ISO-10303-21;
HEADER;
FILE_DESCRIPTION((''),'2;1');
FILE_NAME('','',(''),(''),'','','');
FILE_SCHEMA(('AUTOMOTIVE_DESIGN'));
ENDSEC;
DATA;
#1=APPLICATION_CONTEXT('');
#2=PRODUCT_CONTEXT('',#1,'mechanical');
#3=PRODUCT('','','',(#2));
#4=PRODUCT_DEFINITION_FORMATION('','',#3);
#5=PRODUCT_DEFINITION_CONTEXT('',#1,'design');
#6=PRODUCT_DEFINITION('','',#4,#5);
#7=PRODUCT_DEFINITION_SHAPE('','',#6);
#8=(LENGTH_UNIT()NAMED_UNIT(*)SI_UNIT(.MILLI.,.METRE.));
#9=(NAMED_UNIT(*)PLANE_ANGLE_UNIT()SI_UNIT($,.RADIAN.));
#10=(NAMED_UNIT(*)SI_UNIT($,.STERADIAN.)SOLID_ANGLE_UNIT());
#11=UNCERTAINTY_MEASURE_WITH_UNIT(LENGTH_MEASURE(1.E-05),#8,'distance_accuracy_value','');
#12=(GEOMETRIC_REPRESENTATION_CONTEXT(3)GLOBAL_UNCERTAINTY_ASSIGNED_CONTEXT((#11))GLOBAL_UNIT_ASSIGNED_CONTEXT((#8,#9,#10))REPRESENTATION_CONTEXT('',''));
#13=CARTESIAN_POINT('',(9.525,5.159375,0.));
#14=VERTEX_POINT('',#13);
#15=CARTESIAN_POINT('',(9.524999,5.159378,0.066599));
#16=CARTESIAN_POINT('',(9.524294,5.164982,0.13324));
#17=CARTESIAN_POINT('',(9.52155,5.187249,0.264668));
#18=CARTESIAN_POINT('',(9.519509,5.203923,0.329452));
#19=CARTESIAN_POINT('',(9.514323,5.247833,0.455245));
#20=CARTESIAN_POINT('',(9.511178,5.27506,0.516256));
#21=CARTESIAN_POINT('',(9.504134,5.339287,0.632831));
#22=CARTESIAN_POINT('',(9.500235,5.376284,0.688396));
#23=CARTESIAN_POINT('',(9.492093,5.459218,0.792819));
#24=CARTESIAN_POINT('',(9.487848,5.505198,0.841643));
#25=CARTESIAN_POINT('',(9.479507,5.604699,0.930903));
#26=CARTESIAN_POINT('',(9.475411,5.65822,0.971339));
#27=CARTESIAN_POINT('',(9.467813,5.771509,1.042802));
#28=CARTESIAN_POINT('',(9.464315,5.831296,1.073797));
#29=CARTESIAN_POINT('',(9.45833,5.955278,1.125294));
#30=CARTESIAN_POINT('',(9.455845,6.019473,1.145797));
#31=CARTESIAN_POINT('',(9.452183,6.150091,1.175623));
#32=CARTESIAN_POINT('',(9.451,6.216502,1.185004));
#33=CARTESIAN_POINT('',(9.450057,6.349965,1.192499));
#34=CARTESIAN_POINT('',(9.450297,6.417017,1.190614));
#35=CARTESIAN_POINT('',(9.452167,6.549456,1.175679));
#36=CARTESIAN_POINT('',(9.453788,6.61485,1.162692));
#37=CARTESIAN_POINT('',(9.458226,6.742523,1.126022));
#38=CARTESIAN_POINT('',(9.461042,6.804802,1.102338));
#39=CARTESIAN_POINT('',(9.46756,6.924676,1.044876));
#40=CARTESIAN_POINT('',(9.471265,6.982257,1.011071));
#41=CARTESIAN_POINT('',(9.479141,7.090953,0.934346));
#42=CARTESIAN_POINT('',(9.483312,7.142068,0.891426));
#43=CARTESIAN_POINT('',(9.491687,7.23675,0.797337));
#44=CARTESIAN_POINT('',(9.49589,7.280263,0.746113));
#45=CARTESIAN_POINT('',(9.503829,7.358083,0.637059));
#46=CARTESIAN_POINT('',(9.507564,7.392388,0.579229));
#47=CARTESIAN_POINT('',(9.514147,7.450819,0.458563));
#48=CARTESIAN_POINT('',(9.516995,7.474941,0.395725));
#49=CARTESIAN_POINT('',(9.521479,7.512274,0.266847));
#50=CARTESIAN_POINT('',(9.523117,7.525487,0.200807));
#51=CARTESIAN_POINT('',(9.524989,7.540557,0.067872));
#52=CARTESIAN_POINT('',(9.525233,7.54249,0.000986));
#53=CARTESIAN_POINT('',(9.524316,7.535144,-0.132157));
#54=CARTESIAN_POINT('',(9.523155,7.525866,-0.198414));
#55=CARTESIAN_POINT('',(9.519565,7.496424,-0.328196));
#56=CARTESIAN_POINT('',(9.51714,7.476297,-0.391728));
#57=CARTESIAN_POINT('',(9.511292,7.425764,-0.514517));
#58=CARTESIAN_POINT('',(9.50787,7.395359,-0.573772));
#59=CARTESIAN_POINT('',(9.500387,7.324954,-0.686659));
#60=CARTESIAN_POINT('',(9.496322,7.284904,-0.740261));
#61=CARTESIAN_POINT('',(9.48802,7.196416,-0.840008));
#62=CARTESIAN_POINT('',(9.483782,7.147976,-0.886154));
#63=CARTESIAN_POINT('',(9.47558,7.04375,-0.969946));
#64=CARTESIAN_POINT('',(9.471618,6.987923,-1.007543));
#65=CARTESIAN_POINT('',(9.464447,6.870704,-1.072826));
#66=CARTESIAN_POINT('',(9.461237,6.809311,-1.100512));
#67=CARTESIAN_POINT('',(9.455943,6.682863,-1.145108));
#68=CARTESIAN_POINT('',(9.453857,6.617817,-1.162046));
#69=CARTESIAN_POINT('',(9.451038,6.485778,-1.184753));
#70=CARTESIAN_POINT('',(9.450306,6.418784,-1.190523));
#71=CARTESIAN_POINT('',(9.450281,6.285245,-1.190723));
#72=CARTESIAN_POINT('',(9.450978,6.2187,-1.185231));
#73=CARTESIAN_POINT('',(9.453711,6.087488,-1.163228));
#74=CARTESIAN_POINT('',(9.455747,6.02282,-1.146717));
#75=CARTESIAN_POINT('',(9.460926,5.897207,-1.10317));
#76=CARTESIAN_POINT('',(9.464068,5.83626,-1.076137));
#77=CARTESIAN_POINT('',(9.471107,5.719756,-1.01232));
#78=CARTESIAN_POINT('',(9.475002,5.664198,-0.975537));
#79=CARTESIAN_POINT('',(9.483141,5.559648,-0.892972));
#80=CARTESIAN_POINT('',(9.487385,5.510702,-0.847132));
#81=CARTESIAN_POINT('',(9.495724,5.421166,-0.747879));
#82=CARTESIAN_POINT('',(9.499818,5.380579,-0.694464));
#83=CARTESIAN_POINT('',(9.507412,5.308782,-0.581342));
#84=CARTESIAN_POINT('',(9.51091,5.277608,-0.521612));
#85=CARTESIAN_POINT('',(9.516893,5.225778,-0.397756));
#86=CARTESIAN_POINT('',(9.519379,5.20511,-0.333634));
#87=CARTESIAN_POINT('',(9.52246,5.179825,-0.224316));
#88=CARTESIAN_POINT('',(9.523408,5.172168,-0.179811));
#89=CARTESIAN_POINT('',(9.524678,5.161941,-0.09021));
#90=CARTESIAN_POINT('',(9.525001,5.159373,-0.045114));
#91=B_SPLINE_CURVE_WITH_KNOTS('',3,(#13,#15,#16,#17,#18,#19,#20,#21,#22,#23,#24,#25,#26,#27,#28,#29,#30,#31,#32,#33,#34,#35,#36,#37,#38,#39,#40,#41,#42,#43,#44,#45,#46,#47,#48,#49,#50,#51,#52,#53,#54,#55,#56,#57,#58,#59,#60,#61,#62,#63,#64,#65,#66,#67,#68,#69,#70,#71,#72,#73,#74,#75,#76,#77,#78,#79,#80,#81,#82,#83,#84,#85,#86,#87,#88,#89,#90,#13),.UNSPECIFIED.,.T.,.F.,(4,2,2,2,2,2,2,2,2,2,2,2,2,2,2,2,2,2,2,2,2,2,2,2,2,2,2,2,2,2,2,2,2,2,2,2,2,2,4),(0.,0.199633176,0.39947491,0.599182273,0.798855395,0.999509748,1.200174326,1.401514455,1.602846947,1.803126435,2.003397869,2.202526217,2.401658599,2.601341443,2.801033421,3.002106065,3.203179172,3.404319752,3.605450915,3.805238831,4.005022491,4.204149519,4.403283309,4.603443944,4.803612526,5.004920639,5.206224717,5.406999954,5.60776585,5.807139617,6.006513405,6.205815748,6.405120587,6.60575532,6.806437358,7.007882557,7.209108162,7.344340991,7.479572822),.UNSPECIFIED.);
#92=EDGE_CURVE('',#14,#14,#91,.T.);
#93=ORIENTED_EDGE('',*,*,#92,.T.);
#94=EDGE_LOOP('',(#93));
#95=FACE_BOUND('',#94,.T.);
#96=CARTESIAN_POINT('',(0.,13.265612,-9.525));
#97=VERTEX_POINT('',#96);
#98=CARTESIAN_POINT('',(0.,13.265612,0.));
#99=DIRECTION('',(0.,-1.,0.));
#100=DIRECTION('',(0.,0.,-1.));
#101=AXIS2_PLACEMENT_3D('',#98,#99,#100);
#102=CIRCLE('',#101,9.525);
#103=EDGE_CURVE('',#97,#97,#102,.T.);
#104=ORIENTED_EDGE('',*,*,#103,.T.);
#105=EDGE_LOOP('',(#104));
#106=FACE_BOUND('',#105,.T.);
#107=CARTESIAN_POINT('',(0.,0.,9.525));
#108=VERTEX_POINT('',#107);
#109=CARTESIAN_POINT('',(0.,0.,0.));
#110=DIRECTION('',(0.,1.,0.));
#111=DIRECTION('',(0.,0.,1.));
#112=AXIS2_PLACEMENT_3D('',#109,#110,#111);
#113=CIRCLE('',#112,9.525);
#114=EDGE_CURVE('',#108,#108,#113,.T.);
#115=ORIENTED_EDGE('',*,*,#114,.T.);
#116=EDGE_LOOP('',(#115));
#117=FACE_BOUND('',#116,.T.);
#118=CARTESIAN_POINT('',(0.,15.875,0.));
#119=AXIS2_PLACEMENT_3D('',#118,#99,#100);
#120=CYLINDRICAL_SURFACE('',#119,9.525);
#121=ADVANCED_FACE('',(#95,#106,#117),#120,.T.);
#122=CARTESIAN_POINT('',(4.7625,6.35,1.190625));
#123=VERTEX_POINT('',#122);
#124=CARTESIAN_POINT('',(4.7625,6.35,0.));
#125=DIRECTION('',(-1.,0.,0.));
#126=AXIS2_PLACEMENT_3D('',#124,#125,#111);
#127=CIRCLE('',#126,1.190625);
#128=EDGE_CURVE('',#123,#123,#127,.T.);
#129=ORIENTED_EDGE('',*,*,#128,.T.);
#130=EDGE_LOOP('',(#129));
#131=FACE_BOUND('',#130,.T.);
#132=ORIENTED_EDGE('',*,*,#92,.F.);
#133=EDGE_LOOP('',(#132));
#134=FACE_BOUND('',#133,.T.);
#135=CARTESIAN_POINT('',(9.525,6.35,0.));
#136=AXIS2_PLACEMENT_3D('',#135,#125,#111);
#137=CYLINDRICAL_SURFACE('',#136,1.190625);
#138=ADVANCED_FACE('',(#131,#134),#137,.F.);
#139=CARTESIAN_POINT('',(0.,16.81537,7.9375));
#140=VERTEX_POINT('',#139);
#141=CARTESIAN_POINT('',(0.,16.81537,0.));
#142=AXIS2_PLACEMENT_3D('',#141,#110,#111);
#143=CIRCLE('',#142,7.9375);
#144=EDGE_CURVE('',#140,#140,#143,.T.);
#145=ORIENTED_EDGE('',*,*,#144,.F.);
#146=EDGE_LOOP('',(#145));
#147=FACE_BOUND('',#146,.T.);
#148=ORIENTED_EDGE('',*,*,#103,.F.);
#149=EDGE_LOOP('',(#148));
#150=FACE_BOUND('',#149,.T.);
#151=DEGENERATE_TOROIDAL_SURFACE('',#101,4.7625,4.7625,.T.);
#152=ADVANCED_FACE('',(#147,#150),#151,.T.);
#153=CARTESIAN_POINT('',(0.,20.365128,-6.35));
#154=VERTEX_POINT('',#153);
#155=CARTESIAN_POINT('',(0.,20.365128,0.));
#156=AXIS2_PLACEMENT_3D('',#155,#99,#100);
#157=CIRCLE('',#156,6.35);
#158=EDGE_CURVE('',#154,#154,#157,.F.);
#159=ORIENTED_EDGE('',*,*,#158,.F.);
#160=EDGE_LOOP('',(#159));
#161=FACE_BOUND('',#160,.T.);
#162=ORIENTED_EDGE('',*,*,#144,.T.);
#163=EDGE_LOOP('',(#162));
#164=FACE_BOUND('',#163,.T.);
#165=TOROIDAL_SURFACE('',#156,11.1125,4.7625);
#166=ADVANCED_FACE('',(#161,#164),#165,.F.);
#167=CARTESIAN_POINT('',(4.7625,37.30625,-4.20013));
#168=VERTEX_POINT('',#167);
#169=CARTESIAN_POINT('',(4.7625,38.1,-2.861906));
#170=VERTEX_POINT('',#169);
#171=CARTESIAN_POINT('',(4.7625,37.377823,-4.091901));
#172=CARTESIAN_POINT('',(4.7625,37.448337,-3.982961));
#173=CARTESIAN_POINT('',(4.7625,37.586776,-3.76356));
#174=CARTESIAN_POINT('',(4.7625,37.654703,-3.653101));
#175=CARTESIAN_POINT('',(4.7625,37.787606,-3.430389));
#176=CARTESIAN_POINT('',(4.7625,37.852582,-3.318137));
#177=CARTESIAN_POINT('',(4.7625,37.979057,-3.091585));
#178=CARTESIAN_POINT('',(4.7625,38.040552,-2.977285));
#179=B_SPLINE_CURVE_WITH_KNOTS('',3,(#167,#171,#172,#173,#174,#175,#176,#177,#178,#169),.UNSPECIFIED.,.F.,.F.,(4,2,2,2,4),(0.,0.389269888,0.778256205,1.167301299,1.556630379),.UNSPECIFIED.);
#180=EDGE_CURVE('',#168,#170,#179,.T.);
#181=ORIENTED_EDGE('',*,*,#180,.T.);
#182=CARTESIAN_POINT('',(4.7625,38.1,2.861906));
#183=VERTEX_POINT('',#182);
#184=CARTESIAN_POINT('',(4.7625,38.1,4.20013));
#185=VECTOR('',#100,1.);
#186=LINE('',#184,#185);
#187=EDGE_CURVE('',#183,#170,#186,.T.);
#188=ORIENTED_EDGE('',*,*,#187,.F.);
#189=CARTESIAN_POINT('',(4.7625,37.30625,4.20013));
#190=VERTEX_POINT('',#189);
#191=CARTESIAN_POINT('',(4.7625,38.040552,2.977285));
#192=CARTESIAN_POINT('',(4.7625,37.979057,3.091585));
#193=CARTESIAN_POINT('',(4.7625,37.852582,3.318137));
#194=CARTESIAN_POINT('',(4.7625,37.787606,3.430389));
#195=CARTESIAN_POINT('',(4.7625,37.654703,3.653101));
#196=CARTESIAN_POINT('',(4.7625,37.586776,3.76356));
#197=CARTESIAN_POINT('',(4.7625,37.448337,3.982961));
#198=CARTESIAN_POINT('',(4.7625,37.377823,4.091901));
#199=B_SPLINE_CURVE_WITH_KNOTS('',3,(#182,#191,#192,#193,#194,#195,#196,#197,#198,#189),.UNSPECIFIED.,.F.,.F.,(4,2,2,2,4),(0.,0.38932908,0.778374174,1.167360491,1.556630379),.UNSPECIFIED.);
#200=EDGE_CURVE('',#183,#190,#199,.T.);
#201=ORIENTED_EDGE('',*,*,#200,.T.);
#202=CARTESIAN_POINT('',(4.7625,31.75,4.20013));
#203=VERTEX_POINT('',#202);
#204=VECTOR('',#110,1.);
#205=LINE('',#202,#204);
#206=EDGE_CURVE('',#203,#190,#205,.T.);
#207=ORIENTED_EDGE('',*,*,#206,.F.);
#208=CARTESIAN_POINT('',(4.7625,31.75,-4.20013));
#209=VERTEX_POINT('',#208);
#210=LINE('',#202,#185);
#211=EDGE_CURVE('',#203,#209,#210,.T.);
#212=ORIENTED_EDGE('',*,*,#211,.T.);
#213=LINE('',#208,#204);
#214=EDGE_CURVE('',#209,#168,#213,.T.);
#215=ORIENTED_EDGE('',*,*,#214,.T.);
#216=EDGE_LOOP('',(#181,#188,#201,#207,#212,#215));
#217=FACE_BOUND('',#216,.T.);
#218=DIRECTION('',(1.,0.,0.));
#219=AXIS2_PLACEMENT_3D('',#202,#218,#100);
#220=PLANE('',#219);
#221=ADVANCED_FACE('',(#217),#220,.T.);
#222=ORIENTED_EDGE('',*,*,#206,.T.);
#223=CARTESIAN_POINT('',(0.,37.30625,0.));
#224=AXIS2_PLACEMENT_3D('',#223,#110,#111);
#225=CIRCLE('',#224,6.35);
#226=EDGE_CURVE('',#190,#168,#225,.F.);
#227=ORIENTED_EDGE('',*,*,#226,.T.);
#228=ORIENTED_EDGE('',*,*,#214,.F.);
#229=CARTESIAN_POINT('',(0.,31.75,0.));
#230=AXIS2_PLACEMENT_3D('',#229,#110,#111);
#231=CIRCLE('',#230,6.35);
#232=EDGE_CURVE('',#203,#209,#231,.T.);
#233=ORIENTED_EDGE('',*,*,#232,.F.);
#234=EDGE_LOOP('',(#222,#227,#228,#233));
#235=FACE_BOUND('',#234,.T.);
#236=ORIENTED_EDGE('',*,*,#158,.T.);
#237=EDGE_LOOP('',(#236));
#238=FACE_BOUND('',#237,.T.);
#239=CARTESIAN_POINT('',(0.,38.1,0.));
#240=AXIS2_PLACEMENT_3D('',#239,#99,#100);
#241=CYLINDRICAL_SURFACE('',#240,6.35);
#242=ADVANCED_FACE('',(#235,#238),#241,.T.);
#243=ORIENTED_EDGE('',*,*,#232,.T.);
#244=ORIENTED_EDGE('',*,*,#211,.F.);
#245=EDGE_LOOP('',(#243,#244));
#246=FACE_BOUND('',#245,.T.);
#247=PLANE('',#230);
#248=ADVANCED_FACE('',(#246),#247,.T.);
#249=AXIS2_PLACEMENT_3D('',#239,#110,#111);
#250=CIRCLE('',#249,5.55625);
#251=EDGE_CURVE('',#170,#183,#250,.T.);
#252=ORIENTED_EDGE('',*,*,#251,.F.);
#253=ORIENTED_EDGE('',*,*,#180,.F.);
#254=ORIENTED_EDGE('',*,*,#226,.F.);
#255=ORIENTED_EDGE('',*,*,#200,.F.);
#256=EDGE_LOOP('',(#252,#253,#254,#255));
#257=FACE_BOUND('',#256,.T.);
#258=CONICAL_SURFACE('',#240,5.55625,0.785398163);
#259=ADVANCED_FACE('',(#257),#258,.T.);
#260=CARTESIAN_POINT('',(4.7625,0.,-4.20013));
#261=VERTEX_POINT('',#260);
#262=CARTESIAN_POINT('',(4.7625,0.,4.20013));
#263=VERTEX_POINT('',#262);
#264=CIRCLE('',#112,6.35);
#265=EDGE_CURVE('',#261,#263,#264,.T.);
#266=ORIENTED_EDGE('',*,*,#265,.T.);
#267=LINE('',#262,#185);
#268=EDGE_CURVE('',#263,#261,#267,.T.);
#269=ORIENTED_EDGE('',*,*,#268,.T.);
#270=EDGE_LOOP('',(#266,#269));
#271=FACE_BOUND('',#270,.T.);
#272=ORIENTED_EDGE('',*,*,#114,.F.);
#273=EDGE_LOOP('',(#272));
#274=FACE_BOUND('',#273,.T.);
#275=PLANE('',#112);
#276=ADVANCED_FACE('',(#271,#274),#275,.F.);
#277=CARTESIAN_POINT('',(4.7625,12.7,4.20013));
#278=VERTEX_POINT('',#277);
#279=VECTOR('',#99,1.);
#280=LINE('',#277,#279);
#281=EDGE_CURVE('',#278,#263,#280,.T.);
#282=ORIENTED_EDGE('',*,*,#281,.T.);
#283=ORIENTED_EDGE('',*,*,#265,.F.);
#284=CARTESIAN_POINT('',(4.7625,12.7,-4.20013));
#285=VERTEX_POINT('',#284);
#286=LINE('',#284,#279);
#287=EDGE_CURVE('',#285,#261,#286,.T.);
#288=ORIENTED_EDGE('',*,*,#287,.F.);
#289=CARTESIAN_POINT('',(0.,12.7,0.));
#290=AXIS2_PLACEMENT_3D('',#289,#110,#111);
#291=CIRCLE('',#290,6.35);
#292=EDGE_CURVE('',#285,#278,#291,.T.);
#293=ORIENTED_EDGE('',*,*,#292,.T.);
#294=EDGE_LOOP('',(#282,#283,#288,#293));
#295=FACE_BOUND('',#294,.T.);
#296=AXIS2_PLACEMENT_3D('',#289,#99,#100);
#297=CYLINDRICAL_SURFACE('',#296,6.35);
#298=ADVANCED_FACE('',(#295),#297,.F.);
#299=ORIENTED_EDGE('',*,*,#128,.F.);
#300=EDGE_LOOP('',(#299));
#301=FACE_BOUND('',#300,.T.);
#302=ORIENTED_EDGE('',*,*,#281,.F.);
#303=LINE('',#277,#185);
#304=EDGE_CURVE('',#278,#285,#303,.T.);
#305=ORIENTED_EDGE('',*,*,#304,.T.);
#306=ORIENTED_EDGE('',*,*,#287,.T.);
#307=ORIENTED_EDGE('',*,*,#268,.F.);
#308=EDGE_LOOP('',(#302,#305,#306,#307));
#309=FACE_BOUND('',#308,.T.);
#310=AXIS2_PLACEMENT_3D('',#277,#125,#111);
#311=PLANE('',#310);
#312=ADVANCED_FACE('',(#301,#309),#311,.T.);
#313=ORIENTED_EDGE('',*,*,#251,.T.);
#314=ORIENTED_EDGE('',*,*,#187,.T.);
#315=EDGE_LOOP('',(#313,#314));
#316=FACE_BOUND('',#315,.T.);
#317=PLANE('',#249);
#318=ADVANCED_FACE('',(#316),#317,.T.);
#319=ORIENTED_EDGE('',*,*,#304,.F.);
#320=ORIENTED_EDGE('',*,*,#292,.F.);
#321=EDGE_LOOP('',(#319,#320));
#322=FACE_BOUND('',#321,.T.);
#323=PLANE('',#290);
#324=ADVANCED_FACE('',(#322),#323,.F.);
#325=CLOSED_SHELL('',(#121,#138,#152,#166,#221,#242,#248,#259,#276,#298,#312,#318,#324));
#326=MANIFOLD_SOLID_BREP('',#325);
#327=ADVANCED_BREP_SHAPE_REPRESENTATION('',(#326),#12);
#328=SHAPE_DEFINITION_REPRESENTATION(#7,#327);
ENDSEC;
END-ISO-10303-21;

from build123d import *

# Parameters (mm, degrees)
SKETCH1_R           = 6.35
BASE_EXTRUDE_DEPTH  = 38.1
SKETCH3_R           = 9.525
BOSS_EXTRUDE1_DEPTH = 15.875
CUT_EXTRUDE1_DEPTH  = 12.7
FILLET1_R           = 4.7625
FILLET2_R           = 4.7625
SKETCH5_R           = 1.190625
CUT_EXTRUDE2_DEPTH  = 42.790769119
CUT_EXTRUDE3_START  = -6.35
CUT_EXTRUDE3_DEPTH  = 6.35
CHAMFER1_SIZE       = 0.79375


with BuildPart() as part:
    # Sketch1 → Base-Extrude (new body)
    with BuildSketch(Plane(origin=(0, 0, 0), x_dir=(-1, 0, 0), z_dir=(0, 1, 0))):
        with Locations(Location((0, 0, 0), (0, 0, 270))):
            Circle(SKETCH1_R)
    extrude(amount=BASE_EXTRUDE_DEPTH)

    # Sketch3 → Boss-Extrude1 (add)
    with BuildSketch(Plane(origin=(0, 0, 0), x_dir=(-1, 0, 0), z_dir=(0, 1, 0))):
        with Locations(Location((0, 0, 0), (0, 0, 90))):
            Circle(SKETCH3_R)
    extrude(amount=BOSS_EXTRUDE1_DEPTH)

    # Sketch4 → Cut-Extrude1 (cut)
    with BuildSketch(Plane(origin=(0, 0, 0), x_dir=(-1, 0, 0), z_dir=(0, 1, 0))):
        with BuildLine():
            Line((-4.7625, 4.200130206), (-4.7625, -4.200130206))
            ThreePointArc((-4.7625, -4.200130206), (6.35, 0), (-4.7625, 4.200130206))
        make_face()
    extrude(amount=CUT_EXTRUDE1_DEPTH, mode=Mode.SUBTRACT)

    # Fillet1
    # the kernel refuses this fillet: 4.7625 mm, written as the material it adds along each edge
    with BuildSketch(Plane(origin=(0, 15.875, 0), x_dir=(0, 0, -1), z_dir=(-1, 0, 0))) as fillet1_piece_1:
        with BuildLine():
            CenterArc((11.1125, -4.490128061), FILLET1_R, 109.471220634, 70.528779366)
            Line((6.35, -4.490128061), (6.25475, -4.490128061))
            Line((6.25475, -4.490128061), (6.25475, 0))
            Line((6.25475, 0), (6.35, 0.09525))
            ThreePointArc((6.35, 0.09525), (7.9375, 0.09525), (9.49325, 0.089802561))
            Line((9.49325, 0.089802561), (9.525, 0))
        make_face()
    revolve(axis=Axis((0, 15.875, 0), (0, -1, 0)))

    # Fillet2
    fillet2_edges = [part.edges().sort_by_distance(p)[0] for p in [
        (9.525, 15.875, 0),
    ]]
    fillet(fillet2_edges, radius=FILLET2_R)

    # Sketch5 → Cut-Extrude2 (cut, through all)
    with BuildSketch(Plane.ZY.offset(-4.7625)):
        with Locations((0, 6.35)):
            Circle(SKETCH5_R)
    extrude(amount=-CUT_EXTRUDE2_DEPTH, mode=Mode.SUBTRACT)

    # Sketch7 → Cut-Extrude3 (cut)
    with BuildSketch(Plane(origin=(0, 38.1, 0), x_dir=(-1, 0, 0), z_dir=(0, 1, 0)).offset(CUT_EXTRUDE3_START)):
        with BuildLine():
            Line((-4.7625, 4.200130206), (-4.7625, -4.200130206))
            ThreePointArc((-4.7625, -4.200130206), (-6.35, 0), (-4.7625, 4.200130206))
        make_face()
    extrude(amount=CUT_EXTRUDE3_DEPTH, mode=Mode.SUBTRACT)

    # Chamfer1
    chamfer1_edges = [part.edges().sort_by_distance(p)[0] for p in [
        (-5.787630206, 38.1, 2.612630206),
    ]]
    chamfer(chamfer1_edges, length=CHAMFER1_SIZE)


solid = part.part
